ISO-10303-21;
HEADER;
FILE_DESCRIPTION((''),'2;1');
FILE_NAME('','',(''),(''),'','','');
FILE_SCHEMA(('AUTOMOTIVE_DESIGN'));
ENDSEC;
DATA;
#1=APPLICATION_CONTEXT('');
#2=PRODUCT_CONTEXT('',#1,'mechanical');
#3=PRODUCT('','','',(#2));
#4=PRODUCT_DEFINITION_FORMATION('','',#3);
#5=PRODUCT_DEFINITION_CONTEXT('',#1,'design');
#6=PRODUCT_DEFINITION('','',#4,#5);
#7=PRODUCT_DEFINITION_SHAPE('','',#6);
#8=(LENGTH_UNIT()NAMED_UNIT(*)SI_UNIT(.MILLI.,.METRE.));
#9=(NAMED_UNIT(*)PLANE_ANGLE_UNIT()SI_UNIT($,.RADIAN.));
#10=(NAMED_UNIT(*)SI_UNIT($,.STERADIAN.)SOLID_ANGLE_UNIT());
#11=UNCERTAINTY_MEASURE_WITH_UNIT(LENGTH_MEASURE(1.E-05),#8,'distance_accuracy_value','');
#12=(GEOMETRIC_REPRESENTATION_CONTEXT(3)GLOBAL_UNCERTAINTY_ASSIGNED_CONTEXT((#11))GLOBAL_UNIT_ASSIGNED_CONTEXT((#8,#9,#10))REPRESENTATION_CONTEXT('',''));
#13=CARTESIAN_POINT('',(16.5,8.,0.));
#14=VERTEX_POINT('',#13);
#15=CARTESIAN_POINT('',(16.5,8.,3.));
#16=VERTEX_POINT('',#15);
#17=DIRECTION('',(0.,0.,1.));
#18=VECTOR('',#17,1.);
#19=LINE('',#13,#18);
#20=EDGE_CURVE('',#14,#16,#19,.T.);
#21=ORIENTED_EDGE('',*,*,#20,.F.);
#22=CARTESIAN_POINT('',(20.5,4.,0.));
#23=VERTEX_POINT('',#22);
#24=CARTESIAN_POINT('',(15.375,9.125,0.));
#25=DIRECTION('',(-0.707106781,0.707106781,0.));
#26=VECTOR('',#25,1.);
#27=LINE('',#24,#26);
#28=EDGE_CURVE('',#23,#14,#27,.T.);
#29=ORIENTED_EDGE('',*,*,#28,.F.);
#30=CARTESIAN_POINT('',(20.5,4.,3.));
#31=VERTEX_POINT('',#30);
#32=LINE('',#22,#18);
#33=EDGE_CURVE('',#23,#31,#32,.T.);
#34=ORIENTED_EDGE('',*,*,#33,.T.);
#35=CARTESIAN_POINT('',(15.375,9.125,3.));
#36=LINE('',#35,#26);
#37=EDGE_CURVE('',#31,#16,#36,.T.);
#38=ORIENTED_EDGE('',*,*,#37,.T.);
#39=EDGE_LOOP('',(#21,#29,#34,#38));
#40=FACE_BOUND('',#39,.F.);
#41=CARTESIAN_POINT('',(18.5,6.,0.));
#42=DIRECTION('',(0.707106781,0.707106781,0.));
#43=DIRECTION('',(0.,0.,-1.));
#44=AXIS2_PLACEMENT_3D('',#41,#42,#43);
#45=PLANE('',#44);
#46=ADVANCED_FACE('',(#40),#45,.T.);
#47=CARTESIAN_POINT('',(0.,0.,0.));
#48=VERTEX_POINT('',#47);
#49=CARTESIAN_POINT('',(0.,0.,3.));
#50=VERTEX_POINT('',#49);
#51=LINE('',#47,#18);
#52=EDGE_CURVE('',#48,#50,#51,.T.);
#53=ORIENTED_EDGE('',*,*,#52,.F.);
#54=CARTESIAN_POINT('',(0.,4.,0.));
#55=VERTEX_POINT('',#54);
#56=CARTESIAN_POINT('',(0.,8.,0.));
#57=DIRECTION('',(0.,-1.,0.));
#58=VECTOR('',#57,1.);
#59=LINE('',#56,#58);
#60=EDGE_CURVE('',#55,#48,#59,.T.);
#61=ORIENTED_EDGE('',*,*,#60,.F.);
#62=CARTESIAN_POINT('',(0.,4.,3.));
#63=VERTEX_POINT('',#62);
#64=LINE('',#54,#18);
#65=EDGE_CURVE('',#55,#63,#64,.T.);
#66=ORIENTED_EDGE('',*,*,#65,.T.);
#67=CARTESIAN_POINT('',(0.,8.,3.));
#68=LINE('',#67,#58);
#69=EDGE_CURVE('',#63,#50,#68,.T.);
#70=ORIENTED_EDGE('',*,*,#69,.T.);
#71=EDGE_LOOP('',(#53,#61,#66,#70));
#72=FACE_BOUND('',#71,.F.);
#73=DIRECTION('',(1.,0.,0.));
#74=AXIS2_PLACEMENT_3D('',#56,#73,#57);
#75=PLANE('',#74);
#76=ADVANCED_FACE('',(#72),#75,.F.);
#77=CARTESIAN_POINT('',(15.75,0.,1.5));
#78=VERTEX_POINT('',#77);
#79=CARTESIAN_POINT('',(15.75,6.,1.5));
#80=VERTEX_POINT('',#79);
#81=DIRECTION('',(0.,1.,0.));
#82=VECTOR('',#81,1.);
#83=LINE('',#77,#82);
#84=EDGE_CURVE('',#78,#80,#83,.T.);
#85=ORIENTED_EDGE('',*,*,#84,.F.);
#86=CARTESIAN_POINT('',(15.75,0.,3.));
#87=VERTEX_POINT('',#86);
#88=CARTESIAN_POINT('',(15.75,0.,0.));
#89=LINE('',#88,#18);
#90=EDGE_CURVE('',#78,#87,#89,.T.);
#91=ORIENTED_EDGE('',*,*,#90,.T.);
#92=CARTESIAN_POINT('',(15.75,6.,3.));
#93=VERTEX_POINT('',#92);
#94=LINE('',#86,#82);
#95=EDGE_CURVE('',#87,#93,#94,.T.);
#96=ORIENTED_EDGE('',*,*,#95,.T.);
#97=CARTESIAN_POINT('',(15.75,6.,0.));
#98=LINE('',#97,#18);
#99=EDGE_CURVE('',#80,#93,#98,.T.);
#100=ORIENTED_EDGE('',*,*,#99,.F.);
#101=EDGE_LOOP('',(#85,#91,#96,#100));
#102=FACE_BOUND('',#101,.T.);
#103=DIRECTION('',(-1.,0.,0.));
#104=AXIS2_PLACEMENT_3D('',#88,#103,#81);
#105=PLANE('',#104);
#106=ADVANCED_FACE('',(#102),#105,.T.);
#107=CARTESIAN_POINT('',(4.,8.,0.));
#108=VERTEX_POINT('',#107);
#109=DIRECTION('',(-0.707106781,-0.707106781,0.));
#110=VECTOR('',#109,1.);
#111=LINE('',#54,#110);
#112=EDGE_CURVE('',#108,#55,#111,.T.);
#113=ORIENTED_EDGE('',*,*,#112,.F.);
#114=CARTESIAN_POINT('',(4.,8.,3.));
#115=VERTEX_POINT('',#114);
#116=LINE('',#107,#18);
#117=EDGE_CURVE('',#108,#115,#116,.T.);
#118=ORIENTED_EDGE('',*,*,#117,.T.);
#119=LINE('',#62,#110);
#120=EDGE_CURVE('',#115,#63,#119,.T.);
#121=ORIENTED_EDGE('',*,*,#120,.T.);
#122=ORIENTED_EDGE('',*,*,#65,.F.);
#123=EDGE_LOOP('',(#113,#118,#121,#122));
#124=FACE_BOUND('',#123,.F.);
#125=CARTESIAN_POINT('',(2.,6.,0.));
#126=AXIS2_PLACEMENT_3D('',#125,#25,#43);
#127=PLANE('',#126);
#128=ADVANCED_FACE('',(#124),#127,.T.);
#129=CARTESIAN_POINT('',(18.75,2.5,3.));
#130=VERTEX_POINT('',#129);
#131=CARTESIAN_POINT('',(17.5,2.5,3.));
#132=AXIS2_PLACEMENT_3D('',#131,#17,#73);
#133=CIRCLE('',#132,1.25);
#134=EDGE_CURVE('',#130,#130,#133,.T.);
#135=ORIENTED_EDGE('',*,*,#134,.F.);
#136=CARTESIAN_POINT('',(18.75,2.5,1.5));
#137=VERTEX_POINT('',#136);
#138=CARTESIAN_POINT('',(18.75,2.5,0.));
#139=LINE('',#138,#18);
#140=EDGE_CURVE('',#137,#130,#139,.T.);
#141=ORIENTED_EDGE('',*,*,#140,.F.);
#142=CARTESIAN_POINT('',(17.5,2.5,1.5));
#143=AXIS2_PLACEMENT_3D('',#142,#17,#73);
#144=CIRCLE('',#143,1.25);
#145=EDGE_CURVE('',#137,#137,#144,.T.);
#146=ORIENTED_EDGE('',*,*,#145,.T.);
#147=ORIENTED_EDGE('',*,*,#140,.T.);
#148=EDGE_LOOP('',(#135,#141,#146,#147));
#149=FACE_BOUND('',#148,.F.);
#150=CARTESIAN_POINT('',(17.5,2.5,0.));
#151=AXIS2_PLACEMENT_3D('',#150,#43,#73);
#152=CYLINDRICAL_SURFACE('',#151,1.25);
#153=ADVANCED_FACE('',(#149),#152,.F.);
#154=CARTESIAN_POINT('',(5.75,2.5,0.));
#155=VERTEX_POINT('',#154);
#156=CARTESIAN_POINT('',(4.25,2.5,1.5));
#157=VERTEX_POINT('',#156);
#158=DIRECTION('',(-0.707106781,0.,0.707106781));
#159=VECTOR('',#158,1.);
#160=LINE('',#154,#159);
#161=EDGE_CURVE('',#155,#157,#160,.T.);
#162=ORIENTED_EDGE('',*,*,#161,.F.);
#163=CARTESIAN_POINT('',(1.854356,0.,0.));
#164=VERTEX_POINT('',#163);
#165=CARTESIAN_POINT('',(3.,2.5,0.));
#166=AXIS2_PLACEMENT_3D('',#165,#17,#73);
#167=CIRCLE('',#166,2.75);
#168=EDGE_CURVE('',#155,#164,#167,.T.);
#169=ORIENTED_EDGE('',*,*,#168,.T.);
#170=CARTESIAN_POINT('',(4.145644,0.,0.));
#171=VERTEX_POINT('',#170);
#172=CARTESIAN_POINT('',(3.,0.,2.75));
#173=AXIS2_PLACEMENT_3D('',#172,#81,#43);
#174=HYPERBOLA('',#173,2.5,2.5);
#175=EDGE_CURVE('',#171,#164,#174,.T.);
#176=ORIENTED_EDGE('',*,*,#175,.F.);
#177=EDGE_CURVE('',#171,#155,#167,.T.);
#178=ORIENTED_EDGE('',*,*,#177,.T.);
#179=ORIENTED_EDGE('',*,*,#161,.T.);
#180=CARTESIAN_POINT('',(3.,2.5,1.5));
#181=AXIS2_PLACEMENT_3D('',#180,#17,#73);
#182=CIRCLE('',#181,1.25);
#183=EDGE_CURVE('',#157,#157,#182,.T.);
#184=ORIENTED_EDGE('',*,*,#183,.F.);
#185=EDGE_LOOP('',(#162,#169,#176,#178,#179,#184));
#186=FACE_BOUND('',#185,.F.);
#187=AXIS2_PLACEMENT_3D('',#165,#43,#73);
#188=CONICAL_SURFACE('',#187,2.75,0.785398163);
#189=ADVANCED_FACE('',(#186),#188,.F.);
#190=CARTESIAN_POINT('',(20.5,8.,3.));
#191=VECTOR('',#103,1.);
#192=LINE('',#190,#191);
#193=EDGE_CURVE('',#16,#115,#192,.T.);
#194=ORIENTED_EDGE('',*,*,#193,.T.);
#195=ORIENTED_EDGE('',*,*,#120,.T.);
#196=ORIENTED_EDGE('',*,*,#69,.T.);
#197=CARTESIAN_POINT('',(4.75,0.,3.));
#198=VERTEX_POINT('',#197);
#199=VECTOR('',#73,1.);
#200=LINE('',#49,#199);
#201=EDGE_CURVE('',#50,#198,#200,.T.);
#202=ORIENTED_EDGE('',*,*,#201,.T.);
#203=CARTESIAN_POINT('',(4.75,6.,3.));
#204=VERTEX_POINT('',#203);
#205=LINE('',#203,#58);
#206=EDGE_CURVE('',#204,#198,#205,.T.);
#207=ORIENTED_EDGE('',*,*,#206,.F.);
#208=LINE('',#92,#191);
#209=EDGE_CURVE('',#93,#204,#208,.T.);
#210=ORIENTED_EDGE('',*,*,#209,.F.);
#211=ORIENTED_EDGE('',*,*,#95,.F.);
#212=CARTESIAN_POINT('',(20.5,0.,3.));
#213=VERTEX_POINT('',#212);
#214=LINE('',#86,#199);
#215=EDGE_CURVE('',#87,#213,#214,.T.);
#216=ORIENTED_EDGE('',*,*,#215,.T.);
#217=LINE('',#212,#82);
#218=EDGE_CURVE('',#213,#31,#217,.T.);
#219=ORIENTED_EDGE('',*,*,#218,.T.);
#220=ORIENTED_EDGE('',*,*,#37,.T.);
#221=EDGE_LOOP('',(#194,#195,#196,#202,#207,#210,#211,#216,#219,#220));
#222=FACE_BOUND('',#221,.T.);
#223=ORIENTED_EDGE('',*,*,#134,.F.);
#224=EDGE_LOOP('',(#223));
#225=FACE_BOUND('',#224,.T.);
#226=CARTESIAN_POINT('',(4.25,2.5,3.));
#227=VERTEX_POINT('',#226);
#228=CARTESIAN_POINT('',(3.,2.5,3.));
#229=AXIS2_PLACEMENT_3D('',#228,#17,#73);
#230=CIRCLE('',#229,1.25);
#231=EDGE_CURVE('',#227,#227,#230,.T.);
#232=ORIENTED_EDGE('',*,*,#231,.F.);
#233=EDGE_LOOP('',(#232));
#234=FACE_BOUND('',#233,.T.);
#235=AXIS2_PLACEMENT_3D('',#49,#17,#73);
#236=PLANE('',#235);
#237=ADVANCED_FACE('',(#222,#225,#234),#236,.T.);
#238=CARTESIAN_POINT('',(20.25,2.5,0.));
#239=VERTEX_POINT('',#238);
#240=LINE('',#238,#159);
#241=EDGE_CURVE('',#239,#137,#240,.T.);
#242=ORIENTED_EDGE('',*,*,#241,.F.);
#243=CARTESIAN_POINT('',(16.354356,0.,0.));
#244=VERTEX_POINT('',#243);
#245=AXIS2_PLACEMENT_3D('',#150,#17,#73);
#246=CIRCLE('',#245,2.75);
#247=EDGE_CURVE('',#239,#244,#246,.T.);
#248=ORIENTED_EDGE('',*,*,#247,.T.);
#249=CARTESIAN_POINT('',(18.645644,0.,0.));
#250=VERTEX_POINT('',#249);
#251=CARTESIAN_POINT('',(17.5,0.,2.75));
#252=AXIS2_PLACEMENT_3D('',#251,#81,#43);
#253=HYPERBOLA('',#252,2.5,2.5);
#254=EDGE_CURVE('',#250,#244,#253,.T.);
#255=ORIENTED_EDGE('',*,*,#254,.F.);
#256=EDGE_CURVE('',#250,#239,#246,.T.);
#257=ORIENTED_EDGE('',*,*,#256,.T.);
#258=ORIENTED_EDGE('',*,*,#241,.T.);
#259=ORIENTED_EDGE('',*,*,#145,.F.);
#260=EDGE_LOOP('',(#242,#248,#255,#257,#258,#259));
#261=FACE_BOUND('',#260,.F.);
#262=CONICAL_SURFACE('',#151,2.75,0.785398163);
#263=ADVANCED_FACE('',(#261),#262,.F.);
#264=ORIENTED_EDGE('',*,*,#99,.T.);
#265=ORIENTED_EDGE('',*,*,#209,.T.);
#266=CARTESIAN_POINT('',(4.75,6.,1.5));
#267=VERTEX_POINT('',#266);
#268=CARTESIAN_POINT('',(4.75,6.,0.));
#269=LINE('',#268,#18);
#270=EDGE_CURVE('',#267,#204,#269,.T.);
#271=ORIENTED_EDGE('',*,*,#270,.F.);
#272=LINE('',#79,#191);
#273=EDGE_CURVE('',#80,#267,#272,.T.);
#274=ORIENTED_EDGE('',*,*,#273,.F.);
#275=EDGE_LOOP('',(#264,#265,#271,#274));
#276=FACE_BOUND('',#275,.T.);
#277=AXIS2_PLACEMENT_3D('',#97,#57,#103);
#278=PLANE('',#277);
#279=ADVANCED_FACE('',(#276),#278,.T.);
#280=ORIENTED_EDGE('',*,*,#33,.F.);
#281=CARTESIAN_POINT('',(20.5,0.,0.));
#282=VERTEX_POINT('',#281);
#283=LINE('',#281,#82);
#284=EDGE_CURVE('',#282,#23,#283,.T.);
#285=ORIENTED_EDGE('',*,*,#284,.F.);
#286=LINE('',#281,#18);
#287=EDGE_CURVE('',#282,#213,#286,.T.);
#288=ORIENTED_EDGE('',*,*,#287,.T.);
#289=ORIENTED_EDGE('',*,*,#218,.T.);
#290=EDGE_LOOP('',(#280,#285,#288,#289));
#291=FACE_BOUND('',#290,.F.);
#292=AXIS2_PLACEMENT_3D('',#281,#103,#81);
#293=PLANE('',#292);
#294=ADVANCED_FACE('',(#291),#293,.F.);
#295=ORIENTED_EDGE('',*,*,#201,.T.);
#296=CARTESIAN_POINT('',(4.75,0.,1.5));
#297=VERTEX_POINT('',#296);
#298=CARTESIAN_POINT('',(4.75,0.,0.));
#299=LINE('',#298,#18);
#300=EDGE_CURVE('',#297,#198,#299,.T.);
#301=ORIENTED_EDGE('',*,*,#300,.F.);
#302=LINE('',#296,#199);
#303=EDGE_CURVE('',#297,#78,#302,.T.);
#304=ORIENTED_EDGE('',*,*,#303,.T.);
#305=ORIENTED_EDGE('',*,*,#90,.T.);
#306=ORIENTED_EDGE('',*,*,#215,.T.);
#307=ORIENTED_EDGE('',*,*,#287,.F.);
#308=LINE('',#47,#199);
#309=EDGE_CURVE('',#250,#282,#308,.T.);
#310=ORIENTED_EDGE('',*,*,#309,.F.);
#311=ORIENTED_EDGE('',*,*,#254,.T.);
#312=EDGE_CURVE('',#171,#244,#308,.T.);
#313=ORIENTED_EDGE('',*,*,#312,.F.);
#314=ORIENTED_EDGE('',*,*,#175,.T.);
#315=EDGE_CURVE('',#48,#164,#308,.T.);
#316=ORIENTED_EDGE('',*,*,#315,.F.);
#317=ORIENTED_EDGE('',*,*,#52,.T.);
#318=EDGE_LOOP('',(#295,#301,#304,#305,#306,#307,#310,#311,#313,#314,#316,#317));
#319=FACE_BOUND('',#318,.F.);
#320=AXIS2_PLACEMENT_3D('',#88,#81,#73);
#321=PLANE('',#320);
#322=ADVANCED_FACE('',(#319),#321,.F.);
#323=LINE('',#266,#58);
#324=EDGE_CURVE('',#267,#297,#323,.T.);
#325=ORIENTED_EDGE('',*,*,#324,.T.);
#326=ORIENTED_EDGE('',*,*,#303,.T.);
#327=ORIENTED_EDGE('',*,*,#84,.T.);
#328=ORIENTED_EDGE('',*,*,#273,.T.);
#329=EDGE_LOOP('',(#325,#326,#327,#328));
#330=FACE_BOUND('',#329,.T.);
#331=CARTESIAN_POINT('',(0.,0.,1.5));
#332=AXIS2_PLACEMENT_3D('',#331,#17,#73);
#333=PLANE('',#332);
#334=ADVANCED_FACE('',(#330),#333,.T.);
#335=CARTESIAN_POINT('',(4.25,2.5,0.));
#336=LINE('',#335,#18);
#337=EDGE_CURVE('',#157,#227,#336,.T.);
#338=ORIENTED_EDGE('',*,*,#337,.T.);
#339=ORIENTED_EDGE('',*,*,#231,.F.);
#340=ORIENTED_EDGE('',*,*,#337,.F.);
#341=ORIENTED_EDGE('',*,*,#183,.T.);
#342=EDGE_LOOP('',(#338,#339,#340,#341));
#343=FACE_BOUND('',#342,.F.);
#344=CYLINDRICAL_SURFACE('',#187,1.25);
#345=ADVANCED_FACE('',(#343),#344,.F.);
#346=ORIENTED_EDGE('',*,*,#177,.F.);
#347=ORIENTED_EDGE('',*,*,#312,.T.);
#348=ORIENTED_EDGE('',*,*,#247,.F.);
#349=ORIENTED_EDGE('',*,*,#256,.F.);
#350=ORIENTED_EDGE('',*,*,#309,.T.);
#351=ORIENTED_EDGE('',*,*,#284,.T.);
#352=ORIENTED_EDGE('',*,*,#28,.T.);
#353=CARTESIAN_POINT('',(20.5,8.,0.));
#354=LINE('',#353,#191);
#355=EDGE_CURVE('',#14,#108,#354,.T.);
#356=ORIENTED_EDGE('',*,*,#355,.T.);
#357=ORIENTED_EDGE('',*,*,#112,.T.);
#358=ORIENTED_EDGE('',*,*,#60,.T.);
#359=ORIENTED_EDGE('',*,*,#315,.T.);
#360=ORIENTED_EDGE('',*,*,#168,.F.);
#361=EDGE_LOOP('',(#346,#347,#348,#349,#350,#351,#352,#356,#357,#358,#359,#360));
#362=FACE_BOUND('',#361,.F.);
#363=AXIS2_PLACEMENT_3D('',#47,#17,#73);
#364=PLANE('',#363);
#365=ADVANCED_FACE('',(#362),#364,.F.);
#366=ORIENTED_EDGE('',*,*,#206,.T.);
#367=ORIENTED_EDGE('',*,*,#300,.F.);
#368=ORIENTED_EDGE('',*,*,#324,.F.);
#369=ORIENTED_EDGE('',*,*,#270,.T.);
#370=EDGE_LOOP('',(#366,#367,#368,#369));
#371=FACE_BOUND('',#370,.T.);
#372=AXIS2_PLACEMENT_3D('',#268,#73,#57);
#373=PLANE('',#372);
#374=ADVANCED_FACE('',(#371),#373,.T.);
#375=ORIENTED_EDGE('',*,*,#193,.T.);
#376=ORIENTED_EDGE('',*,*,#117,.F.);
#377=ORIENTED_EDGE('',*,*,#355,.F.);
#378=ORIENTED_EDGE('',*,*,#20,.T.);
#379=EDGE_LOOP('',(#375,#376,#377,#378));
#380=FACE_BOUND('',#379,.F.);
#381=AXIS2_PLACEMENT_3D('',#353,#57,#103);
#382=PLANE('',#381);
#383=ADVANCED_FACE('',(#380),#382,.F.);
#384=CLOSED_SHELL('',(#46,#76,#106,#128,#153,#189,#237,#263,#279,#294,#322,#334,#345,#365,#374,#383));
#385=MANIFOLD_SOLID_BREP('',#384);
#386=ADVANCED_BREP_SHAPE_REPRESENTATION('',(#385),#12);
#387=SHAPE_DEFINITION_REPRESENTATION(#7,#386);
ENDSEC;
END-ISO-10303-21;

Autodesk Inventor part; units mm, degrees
ref_plane "YZ Plane" through (0, 0, 0) normal (1, 0, 0) x (0, 1, 0)
ref_plane "XZ Plane" through (0, 0, 0) normal (0, 1, 0) x (-1, 0, 0)
ref_plane "XY Plane" through (0, 0, 0) normal (0, 0, 1) x (1, 0, 0)
sketch "Sketch1" plane through (0, 0, 0) normal (0, 0, 1) x (1, 0, 0)
  line L0 (20.5, 0) -> (20.5, 8)
  line L1 (20.5, 8) -> (0, 8)
  line L2 (0, 8) -> (0, 0)
  circle A0 centre (3, 2.5) radius 1.25
  circle A1 centre (17.5, 2.5) radius 1.25
  line L3 (4.75, 0) -> (15.75, 0)
  line L4 (15.75, 0) -> (15.75, 6)
  line L5 (15.75, 6) -> (4.75, 6)
  line L6 (4.75, 6) -> (4.75, 0)
  line L7 (0, 0) -> (4.75, 0)
  line L8 (15.75, 0) -> (20.5, 0)
  dimension "d0" = 2.5
  dimension "d1" = 2.5
  dimension "d2" = 14.5
  dimension "d7" = 3
  dimension "d8" = 3
  dimension "d9" = 11
extrude "Extrusion1" add sketch "Sketch1" along normal blind 3 contours L8 L4 L5 L6 L7 L2 L1 L0
extrude "Extrusion2" add sketch "Sketch1" along normal blind 1.5 contours L3 L6 L5 L4
chamfer "Chamfer1" distance 4 angle 45 2 edges at (0, 8, 1.5) (20.5, 8, 1.5)
chamfer "Chamfer2" distance 1.5 angle 45 2 edges at (1.75, 2.5, 0) (16.25, 2.5, 0)
properties part number "switchholder"
